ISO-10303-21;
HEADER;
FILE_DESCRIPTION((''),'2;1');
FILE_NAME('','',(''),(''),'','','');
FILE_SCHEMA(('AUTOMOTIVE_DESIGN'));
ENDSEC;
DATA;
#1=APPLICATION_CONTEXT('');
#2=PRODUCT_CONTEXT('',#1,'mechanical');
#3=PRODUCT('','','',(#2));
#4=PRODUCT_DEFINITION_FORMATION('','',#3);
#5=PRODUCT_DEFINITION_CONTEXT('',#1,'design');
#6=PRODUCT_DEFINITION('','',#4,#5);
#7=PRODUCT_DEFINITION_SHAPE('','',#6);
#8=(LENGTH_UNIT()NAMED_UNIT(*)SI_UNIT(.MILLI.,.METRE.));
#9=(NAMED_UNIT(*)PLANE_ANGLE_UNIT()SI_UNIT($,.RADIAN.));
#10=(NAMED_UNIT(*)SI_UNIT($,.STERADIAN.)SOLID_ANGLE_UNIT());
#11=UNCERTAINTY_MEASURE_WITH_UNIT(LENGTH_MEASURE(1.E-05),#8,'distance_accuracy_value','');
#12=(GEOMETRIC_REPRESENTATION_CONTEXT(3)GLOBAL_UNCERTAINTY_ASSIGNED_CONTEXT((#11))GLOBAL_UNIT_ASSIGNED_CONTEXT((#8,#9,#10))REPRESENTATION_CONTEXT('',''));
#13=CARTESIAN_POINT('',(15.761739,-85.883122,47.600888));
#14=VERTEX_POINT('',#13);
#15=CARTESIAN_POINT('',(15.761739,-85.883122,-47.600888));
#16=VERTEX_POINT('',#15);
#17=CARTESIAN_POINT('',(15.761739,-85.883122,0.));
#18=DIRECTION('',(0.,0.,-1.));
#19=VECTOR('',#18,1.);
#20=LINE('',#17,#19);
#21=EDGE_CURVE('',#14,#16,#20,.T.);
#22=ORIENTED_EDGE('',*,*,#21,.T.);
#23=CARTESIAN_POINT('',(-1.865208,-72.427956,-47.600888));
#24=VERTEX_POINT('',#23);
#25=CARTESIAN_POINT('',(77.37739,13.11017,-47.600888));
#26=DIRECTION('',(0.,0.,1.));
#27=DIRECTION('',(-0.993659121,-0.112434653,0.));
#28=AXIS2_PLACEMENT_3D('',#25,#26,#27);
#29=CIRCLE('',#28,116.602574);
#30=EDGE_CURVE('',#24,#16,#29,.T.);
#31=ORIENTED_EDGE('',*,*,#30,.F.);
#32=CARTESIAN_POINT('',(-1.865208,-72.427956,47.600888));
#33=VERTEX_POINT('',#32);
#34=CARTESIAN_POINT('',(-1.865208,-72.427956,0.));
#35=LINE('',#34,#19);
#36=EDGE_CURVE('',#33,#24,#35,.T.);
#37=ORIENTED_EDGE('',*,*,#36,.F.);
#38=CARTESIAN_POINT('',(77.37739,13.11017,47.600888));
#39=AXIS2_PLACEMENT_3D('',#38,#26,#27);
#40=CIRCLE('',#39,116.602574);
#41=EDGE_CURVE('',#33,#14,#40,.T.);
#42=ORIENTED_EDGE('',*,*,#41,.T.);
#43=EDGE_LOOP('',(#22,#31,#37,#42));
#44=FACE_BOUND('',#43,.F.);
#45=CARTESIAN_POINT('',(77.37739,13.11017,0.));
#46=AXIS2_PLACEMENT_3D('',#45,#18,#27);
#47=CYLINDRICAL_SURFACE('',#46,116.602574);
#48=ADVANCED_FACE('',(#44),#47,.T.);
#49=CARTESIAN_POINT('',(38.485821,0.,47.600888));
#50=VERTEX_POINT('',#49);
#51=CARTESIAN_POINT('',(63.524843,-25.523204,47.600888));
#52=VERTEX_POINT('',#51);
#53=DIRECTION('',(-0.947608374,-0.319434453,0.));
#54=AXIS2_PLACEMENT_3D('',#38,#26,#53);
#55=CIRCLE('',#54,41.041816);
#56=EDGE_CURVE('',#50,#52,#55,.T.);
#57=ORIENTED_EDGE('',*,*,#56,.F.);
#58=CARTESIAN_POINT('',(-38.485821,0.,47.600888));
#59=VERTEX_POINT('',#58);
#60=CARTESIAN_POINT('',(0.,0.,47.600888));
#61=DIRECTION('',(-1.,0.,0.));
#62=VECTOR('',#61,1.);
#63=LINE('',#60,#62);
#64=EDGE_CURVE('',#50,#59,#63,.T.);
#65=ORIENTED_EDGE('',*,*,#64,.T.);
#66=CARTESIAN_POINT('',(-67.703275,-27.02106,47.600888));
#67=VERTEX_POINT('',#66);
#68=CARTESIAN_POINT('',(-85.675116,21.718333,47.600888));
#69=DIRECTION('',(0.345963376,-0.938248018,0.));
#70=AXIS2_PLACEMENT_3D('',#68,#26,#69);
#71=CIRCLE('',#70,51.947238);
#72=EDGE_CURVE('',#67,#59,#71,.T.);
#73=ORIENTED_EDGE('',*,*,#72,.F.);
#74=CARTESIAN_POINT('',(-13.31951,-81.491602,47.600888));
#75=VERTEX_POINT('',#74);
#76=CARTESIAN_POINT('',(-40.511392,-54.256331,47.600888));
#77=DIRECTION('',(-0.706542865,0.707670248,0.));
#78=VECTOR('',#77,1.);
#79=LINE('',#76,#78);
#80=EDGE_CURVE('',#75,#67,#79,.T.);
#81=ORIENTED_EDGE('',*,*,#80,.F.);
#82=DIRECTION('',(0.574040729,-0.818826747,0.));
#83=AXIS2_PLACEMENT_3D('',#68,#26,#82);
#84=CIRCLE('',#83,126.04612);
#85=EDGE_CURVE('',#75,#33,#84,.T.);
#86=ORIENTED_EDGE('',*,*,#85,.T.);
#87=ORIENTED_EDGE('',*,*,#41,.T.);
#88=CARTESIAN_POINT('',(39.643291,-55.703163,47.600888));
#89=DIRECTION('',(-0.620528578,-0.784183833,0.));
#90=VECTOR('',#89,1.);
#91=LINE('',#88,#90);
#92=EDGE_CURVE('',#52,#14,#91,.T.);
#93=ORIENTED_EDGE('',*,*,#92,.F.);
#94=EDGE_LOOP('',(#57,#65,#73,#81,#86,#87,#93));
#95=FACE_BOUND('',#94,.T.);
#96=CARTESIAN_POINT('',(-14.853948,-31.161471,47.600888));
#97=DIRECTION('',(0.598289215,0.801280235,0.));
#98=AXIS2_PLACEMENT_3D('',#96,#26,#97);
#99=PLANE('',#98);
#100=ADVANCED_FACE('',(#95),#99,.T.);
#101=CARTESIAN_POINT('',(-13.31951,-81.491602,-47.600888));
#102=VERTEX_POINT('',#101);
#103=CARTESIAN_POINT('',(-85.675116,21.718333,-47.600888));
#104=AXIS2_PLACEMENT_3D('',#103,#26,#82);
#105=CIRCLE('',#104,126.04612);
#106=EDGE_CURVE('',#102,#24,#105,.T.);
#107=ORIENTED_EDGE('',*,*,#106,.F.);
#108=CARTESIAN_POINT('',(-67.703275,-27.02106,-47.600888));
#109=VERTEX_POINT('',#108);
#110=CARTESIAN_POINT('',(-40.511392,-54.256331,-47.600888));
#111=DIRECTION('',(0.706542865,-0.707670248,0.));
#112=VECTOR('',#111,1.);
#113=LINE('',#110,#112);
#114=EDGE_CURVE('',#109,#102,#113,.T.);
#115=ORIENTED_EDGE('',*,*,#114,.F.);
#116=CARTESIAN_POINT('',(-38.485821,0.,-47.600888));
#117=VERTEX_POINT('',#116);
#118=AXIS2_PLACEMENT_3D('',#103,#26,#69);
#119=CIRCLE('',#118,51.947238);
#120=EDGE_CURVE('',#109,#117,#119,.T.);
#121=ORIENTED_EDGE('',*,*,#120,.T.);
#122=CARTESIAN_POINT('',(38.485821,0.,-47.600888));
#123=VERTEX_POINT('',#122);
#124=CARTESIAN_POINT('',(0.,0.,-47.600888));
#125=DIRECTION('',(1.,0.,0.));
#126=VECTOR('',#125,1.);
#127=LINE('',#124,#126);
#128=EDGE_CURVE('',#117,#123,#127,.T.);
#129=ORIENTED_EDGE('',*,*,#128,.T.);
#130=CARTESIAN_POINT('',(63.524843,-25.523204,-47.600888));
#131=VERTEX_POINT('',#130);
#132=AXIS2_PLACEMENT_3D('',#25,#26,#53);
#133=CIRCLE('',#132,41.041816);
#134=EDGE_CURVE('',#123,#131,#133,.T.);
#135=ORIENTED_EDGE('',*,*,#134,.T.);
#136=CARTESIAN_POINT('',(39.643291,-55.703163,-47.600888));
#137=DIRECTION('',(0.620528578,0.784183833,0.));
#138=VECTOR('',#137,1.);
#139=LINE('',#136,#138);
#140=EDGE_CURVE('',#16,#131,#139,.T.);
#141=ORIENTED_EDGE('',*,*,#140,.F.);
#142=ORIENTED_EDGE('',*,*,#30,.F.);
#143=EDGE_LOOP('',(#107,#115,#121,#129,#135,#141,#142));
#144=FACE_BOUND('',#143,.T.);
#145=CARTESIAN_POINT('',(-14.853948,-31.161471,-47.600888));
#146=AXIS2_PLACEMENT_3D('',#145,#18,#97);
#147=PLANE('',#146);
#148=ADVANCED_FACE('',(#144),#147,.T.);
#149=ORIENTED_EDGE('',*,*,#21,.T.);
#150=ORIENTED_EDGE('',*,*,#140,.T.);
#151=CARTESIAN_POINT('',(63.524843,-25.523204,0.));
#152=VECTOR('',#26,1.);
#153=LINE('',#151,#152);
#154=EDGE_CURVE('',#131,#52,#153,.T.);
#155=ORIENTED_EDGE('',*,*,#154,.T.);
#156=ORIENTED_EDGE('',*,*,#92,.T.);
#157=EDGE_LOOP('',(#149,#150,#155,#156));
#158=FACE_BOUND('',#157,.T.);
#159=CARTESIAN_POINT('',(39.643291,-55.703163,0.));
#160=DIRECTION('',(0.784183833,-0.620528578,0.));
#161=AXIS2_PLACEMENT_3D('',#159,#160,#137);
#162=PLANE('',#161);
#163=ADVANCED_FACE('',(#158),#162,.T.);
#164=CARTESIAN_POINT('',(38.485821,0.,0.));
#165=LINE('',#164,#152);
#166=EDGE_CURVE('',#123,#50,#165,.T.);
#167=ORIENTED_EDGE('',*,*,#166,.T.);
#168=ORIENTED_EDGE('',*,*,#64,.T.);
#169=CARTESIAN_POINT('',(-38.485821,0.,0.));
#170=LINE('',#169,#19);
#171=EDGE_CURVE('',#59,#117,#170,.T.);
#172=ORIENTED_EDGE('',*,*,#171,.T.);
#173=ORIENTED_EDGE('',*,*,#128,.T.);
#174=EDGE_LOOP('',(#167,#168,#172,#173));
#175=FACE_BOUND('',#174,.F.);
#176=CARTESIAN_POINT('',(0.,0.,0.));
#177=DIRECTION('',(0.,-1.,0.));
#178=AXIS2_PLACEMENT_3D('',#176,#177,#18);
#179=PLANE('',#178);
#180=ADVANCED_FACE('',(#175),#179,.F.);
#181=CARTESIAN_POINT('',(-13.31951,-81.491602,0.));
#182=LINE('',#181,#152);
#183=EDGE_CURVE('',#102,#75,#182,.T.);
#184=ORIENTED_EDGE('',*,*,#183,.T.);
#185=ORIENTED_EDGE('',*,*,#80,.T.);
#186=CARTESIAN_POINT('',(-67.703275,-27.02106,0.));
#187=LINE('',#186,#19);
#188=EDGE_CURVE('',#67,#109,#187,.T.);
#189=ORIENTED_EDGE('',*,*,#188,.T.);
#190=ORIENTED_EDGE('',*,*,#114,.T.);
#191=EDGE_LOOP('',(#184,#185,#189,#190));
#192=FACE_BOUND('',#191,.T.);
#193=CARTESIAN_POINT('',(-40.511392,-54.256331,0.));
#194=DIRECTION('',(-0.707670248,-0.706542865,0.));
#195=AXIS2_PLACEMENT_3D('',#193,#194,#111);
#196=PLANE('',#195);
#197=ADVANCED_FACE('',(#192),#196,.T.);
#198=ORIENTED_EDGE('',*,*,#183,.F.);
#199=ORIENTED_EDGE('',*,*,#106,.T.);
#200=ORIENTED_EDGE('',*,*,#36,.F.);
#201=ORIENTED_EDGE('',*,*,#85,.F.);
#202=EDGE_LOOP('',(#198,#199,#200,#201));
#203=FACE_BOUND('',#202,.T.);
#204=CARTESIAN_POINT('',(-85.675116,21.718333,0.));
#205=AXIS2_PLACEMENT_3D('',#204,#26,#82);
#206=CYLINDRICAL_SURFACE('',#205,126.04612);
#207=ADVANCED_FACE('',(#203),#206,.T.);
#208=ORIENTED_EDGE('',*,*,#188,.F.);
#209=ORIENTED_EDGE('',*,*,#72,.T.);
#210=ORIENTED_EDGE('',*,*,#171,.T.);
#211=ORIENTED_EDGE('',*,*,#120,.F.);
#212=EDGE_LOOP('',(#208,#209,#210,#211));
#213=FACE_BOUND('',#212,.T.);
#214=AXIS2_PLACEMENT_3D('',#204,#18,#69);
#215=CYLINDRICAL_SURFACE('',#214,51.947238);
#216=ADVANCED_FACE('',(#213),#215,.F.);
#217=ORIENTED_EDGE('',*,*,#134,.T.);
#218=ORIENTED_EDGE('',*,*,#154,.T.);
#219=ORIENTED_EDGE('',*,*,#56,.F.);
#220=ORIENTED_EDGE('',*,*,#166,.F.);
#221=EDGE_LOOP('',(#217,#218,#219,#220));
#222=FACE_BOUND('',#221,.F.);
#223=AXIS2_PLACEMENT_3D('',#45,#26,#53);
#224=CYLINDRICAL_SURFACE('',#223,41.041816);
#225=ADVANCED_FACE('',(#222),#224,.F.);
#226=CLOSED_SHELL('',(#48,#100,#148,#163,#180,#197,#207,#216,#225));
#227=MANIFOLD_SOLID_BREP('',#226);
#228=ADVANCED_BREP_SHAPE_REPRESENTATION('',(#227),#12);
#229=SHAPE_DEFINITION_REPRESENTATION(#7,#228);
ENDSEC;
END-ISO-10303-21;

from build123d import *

# Parameters (mm, degrees)
F0_W = 76.971642673
F0_H = 95.2017754316


# Not quite as in the source:
# - a feature names something its author has since deleted; it is built from what else it names
# - the program builds the solid bodies; features that only make, move or delete a surface that nothing else refers to are left out


with BuildPart() as f2:
    # F2: sweep along a path in F1
    with BuildLine(Plane.XY) as f2_path:
        ThreePointArc((0, 0), (13.4369935077, -32.3954640503), (39.643291384, -55.703163147))
    # F0 (on Front) → F2 (sweep)
    with BuildSketch(Plane.XZ):
        Rectangle(F0_W, F0_H)
    sweep(path=f2_path.line)

    # F3: sweep along a path in F1
    with BuildLine(Plane.XY) as f3_path:
        ThreePointArc((-40.5113920569, -54.2563311756), (-14.8539477386, -31.1614707896), (0, 0))
    # F0 (on Front) → F3 (sweep)
    with BuildSketch(Plane.XZ):
        Rectangle(F0_W, F0_H)
    sweep(path=f3_path.line)


solid = f2.part
